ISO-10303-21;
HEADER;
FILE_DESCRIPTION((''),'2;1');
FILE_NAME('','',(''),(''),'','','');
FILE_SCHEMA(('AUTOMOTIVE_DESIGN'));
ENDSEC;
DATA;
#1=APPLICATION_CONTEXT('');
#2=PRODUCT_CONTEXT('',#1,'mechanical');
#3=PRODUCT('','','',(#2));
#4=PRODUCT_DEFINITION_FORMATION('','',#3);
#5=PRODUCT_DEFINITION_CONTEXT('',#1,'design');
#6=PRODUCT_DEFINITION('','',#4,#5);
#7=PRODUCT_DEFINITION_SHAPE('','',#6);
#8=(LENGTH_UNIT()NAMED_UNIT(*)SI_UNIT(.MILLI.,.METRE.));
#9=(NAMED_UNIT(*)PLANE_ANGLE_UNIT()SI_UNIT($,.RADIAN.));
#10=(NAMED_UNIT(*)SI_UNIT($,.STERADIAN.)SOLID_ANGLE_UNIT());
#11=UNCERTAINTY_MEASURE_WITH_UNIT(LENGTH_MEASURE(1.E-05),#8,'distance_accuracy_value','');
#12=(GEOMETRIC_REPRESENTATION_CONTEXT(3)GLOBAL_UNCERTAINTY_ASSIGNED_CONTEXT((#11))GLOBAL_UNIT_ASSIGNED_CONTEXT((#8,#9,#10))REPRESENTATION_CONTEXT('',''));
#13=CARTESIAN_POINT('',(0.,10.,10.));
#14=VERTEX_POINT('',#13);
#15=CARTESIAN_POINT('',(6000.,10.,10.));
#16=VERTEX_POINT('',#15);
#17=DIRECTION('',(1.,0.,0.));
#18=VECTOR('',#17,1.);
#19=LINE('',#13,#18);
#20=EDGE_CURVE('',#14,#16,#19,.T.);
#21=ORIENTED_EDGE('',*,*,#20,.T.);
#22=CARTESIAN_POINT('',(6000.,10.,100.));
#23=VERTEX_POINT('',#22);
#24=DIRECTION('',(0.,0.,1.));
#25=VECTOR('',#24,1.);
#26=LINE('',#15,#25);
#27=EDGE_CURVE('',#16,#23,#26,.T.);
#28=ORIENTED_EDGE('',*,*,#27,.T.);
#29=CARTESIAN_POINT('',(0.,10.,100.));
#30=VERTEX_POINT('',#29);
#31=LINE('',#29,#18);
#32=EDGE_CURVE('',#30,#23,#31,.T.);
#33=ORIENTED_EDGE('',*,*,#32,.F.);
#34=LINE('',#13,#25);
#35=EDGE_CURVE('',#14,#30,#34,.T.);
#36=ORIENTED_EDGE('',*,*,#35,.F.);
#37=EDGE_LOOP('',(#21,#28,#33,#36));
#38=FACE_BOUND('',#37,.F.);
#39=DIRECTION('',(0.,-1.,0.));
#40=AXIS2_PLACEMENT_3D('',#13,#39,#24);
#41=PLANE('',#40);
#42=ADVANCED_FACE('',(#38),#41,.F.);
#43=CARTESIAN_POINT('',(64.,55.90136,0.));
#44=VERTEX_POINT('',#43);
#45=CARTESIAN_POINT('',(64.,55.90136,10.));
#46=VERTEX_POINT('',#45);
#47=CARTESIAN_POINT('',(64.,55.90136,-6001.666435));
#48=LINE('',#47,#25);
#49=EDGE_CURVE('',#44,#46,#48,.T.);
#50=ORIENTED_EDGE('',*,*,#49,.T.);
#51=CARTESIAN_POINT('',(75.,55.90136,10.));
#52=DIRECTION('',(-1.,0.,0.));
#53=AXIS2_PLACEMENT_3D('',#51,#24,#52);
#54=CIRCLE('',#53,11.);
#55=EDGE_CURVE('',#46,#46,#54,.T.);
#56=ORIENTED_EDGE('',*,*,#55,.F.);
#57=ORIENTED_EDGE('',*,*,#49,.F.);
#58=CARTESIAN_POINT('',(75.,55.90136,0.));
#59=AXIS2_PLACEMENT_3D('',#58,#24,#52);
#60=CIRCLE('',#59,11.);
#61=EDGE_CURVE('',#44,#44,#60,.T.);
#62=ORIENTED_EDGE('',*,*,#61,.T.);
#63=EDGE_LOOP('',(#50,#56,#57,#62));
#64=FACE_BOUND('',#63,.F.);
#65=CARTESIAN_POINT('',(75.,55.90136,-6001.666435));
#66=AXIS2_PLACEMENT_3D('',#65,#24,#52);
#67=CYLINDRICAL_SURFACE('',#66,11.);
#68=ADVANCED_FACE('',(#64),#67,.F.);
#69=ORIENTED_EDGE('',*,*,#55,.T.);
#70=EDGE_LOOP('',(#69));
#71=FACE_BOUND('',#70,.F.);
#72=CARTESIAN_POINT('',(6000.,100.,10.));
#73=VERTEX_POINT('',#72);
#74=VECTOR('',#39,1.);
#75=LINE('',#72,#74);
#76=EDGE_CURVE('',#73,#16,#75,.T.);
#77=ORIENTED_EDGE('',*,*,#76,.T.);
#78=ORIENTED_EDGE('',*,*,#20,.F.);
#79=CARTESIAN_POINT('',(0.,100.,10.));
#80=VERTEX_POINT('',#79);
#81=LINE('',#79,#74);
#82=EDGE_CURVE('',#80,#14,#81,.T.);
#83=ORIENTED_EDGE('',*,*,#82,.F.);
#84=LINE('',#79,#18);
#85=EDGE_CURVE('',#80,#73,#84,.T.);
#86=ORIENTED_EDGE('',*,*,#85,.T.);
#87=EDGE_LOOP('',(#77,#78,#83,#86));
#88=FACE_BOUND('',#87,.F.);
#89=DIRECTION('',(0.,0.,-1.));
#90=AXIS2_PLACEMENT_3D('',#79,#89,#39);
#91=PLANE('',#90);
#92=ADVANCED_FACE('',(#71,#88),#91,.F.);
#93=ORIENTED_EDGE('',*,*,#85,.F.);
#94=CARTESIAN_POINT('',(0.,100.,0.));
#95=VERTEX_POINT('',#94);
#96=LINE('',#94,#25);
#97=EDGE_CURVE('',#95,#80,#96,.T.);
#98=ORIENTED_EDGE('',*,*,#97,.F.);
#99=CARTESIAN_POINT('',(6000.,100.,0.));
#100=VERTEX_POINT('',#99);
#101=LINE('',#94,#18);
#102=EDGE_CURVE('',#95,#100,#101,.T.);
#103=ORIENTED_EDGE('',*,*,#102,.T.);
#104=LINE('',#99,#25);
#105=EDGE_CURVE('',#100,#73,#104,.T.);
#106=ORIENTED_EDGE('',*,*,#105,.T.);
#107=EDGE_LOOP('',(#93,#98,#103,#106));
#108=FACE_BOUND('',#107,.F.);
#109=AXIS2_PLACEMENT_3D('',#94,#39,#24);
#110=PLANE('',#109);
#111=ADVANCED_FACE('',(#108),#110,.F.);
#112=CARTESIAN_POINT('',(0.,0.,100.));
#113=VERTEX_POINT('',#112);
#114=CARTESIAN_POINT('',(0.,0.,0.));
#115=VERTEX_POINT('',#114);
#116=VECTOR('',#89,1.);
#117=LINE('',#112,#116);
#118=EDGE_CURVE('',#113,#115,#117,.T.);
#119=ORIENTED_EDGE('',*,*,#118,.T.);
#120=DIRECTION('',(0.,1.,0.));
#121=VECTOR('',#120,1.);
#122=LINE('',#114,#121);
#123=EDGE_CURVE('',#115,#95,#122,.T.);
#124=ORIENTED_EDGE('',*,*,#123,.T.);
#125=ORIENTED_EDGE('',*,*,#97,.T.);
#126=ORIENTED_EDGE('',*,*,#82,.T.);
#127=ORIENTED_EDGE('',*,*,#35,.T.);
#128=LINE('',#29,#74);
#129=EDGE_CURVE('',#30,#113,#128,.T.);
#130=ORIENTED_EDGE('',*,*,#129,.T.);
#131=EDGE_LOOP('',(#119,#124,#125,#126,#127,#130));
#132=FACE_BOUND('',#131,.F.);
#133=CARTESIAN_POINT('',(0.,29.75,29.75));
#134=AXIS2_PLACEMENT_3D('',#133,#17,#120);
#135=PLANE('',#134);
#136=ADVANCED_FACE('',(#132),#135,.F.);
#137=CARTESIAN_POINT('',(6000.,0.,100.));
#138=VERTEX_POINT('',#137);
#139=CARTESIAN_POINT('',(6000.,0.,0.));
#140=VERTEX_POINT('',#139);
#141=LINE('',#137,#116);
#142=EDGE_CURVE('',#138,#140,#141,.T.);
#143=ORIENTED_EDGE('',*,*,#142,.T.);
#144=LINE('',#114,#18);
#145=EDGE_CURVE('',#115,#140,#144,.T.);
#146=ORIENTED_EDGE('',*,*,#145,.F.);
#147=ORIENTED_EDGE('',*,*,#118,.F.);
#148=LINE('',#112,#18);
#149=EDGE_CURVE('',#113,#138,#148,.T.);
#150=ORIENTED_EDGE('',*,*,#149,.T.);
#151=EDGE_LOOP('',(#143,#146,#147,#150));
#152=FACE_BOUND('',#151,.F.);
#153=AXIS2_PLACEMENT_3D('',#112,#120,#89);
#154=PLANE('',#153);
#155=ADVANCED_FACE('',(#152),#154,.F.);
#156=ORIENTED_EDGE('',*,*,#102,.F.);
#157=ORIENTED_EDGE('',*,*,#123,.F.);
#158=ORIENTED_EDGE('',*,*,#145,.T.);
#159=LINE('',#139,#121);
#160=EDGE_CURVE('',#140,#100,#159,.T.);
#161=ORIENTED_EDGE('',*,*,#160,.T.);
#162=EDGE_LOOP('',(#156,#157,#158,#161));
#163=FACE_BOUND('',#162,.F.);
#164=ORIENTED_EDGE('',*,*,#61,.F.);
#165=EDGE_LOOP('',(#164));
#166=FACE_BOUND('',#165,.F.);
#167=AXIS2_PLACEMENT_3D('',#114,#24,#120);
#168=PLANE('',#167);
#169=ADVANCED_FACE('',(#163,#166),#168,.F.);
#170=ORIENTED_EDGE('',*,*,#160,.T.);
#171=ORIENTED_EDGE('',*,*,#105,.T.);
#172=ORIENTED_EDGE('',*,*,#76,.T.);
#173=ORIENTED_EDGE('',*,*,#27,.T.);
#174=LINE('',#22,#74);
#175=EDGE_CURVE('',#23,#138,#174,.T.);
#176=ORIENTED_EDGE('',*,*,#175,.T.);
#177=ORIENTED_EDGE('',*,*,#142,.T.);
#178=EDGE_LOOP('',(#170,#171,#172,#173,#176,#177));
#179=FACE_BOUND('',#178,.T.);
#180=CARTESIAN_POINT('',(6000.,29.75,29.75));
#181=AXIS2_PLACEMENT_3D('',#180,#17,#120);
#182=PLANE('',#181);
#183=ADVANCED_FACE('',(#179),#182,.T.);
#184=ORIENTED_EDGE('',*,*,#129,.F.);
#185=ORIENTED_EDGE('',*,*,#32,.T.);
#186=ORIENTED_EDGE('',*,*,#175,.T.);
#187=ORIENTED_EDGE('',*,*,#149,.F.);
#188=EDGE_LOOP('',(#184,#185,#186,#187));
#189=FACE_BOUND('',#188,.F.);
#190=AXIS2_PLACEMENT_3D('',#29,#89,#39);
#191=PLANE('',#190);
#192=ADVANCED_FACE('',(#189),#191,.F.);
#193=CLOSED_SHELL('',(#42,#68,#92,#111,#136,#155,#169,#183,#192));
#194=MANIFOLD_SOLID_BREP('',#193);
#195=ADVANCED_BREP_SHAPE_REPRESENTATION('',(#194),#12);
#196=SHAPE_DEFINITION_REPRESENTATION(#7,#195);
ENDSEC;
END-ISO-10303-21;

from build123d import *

# Parameters (mm, degrees)
F1_DEPTH = 6000
F3_D     = 22


with BuildPart() as f1:
    # F0 (on Right) → F1 (new body)
    with BuildSketch(Plane.YZ):
        Polygon((0, 100), (0, 0), (100, 0), (100, 10), (10, 10), (10, 100), align=None)
    extrude(amount=F1_DEPTH)

    # F3 (through all)
    with Locations(Plane(origin=(0, 0, 0), x_dir=(1, 0, 0), z_dir=(0, 0, -1))):
        with Locations((75, -55.9013597667)):
            Hole(F3_D / 2)


solid = f1.part
